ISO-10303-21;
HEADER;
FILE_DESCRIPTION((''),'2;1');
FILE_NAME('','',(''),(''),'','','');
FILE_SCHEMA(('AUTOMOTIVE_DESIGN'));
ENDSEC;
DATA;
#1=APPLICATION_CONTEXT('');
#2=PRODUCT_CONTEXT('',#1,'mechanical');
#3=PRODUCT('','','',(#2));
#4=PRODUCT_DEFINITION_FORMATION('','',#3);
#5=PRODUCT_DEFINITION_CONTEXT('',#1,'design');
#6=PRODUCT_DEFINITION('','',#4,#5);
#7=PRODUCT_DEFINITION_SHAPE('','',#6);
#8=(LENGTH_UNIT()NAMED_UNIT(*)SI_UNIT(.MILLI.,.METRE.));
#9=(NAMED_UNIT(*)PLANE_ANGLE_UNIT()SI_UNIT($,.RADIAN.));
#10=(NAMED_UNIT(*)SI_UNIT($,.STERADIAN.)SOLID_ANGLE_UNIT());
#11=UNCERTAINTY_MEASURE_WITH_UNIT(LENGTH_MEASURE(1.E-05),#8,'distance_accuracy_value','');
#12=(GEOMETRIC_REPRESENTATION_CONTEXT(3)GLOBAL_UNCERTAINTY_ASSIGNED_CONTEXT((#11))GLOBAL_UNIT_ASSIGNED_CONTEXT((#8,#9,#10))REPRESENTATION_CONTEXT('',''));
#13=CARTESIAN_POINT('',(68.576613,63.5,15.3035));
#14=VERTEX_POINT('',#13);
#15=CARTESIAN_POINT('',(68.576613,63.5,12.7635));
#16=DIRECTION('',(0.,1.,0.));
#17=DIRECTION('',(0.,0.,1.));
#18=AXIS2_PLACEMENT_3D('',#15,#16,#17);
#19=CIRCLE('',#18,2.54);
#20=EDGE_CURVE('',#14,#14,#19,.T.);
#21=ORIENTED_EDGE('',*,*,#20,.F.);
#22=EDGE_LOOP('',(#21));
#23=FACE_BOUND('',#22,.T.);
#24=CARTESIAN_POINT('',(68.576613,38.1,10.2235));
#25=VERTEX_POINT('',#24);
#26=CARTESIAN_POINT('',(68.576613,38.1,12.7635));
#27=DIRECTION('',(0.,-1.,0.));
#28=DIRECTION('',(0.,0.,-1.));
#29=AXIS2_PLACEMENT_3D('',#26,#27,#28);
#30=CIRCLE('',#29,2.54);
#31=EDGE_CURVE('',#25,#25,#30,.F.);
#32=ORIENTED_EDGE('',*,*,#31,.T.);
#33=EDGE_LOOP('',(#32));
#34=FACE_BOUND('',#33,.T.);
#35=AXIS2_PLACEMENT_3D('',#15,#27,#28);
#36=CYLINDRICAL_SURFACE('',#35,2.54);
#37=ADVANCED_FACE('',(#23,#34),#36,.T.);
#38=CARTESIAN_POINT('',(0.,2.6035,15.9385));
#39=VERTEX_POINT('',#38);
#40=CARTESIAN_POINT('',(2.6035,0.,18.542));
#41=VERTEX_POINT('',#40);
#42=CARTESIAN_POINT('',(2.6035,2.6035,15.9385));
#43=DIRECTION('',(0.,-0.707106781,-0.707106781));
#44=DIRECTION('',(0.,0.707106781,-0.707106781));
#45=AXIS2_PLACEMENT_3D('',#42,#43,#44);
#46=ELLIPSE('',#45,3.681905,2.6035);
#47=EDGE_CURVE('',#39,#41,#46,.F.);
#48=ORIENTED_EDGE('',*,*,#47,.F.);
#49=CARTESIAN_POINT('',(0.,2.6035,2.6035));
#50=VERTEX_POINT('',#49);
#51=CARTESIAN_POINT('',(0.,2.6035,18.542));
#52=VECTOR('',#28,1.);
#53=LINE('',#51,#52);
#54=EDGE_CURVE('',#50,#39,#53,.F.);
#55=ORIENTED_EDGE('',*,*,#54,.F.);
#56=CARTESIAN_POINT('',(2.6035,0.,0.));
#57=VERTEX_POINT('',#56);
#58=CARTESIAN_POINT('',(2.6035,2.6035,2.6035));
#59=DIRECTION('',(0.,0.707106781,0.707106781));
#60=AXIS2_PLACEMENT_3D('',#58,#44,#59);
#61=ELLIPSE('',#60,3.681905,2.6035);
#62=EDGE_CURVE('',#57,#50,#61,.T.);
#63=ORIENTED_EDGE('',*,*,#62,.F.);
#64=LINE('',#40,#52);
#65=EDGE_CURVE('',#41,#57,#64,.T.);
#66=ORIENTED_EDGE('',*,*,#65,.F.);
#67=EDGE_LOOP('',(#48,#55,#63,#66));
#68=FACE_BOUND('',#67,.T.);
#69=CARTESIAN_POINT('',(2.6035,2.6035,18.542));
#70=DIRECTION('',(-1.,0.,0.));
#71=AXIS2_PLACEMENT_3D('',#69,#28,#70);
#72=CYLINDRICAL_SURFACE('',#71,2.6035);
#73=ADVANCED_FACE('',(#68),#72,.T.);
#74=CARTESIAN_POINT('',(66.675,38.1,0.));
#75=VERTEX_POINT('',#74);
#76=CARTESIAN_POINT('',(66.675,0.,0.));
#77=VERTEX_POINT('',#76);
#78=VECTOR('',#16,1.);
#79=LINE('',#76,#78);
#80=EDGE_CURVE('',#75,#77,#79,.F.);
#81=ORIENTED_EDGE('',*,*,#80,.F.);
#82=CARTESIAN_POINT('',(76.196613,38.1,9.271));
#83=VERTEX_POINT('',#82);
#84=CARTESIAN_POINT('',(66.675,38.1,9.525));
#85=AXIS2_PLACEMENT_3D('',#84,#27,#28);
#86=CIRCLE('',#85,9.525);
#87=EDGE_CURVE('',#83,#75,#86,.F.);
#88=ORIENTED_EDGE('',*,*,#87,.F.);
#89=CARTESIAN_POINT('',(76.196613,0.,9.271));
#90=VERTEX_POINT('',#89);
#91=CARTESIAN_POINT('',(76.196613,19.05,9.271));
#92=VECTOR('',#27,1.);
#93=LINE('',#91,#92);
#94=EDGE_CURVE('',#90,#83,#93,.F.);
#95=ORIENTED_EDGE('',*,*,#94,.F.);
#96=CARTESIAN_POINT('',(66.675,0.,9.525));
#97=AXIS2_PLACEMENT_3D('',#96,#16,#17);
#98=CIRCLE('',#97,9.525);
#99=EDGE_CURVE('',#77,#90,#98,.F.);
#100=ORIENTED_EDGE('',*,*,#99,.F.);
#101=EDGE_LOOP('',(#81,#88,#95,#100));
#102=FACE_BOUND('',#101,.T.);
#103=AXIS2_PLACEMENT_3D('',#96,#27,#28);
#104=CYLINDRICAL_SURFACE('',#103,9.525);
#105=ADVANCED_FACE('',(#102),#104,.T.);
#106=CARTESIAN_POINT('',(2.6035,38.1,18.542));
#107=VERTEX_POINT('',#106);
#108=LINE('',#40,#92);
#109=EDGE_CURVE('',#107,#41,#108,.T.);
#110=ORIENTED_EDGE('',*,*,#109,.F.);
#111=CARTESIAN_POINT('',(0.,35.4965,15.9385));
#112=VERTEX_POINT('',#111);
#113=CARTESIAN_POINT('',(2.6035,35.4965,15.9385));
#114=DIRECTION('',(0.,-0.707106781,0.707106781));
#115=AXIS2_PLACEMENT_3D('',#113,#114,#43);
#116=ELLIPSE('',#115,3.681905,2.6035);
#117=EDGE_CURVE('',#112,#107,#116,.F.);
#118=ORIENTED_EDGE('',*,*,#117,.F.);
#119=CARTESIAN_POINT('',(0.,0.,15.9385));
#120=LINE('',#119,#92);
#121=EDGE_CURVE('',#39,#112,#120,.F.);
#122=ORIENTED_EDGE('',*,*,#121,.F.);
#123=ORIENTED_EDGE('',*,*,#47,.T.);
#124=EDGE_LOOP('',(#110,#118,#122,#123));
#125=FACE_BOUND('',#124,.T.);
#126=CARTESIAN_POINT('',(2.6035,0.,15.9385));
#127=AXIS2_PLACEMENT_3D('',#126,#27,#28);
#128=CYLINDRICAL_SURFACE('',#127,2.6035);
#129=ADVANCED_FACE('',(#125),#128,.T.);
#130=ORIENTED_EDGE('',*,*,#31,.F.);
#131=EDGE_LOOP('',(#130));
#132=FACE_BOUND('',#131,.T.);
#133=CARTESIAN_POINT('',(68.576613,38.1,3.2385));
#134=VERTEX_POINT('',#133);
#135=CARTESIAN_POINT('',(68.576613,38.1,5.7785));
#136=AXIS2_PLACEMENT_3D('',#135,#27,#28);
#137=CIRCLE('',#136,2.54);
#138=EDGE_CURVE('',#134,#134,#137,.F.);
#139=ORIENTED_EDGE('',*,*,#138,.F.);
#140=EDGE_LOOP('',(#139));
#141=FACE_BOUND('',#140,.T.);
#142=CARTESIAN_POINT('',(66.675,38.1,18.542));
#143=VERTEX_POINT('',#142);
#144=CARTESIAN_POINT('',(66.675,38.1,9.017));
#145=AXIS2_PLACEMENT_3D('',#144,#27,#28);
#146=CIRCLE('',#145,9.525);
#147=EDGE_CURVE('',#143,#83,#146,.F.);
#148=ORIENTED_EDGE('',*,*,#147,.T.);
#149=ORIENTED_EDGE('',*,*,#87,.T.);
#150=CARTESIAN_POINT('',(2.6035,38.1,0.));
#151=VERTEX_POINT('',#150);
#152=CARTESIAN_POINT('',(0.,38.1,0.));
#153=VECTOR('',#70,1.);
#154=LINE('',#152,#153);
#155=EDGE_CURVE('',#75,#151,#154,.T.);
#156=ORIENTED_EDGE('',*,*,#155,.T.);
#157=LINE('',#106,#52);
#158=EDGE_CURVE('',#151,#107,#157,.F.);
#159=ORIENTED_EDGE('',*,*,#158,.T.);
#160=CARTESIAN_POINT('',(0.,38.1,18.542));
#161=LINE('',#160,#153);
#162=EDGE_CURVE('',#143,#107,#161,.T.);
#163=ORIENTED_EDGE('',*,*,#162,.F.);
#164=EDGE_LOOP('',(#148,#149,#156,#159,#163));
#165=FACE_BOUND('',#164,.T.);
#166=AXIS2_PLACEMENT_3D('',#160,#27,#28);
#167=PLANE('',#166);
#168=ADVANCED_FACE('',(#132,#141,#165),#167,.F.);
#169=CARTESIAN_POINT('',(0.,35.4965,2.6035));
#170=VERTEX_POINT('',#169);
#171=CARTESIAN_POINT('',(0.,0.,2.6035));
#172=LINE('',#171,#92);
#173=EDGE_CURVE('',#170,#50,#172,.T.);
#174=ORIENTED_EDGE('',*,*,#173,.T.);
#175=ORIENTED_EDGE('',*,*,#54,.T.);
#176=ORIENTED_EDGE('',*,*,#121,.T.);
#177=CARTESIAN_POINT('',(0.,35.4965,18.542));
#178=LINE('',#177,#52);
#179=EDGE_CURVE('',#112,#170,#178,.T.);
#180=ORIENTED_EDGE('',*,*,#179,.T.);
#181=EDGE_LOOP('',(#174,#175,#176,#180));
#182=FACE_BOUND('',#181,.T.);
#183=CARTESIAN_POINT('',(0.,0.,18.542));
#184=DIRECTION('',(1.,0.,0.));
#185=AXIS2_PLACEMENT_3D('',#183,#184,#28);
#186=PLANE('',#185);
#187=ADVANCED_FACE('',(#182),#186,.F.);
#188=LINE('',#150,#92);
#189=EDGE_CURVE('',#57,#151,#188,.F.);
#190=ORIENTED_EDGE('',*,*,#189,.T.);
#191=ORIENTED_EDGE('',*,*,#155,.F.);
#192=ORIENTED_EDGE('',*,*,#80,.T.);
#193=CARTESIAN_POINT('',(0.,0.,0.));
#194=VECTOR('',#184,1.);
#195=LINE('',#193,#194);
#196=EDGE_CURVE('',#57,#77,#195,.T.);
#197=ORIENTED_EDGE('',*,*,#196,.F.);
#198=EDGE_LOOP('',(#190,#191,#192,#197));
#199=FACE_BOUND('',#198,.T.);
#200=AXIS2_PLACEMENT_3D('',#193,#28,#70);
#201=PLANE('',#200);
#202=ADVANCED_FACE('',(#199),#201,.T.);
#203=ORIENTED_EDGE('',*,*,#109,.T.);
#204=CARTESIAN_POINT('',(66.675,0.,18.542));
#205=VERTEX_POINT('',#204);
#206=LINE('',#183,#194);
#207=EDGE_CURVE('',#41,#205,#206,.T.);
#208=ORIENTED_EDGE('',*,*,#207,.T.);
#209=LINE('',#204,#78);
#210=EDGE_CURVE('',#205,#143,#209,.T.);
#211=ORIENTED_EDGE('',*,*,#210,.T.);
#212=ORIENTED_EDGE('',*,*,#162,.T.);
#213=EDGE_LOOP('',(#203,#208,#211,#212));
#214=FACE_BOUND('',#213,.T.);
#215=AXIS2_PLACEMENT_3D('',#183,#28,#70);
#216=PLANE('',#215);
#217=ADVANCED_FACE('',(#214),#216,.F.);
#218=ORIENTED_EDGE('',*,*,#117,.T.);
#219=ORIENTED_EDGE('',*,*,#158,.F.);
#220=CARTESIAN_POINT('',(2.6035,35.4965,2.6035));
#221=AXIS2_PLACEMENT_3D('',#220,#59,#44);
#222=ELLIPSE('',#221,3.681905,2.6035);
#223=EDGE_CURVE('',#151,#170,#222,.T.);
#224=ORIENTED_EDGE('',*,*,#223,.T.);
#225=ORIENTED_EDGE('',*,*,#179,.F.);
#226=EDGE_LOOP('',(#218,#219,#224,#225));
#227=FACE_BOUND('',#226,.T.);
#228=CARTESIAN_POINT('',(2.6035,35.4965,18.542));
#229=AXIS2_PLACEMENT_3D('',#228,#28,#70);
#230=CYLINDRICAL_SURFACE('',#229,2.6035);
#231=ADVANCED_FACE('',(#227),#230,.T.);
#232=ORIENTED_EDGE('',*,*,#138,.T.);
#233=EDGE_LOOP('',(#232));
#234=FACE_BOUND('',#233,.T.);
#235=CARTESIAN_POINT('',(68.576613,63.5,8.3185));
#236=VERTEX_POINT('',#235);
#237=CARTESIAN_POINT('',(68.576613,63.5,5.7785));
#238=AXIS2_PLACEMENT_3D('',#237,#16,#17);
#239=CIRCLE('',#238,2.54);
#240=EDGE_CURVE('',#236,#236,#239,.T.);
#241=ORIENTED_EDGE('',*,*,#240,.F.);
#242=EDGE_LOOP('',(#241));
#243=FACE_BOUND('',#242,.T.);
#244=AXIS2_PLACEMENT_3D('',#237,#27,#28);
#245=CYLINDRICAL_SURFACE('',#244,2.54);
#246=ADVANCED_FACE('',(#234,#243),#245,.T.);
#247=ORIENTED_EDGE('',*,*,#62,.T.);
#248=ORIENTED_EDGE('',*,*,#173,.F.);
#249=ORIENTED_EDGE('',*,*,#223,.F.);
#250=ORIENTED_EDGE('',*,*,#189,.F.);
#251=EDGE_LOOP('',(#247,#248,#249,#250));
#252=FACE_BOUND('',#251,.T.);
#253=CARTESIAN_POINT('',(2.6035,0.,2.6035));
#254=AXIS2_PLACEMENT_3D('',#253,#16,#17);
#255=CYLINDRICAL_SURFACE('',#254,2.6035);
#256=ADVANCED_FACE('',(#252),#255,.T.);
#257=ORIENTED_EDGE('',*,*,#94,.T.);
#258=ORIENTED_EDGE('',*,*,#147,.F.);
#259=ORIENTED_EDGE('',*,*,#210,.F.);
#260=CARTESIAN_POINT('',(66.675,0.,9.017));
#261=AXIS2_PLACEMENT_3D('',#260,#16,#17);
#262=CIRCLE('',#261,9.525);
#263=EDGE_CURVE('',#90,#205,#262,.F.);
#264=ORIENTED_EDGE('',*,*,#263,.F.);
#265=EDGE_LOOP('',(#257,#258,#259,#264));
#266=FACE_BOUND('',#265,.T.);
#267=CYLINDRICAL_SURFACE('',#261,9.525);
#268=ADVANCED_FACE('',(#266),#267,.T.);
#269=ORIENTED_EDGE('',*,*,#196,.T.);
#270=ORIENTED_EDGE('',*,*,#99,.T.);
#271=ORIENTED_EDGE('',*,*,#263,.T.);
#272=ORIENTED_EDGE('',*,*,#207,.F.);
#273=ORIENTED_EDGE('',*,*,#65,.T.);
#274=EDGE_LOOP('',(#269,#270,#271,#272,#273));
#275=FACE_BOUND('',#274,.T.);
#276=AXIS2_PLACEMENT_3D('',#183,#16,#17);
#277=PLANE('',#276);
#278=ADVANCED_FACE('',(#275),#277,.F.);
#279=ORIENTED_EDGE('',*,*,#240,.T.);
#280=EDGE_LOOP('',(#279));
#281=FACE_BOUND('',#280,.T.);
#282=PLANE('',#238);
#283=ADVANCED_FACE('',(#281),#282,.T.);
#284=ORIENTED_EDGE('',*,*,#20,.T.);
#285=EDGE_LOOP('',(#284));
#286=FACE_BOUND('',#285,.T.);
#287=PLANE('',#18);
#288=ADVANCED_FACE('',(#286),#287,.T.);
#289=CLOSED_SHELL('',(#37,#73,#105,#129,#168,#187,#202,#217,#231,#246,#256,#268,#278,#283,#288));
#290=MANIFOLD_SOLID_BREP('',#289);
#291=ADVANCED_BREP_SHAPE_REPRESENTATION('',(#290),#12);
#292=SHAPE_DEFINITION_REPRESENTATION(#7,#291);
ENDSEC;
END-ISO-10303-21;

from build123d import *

# Parameters (mm, degrees)
SKETCH1_W           = 76.2
SKETCH1_H           = 38.1
BOSS_EXTRUDE1_DEPTH = 18.542
FILLET1_R           = 9.525
SKETCH2_R           = 2.54
BOSS_EXTRUDE2_DEPTH = 25.4
FILLET2_R           = 2.6035


with BuildPart() as part:
    # Sketch1 → Boss-Extrude1 (new body)
    with BuildSketch(Plane.XY):
        with Locations((38.1, 19.05)):
            Rectangle(SKETCH1_W, SKETCH1_H)
    extrude(amount=BOSS_EXTRUDE1_DEPTH)

    # Fillet1
    # the kernel refuses this fillet: 9.525 mm, written as the material it takes off along each edge
    with BuildSketch(Plane(origin=(76.2, -23.8125, 18.542), x_dir=(0, 0, -1), z_dir=(0, 1, 0))) as fillet1_piece_1:
        with BuildLine():
            CenterArc((FILLET1_R, FILLET1_R), FILLET1_R, 180, 90)
            Line((0, FILLET1_R), (0, 0))
            Line((0, 0), (FILLET1_R, 0))
        make_face()
    extrude(amount=85.725, mode=Mode.SUBTRACT)
    with BuildSketch(Plane(origin=(76.2, -23.8125, 0), x_dir=(0, 0, 1), z_dir=(0, 1, 0))) as fillet1_piece_2:
        with BuildLine():
            CenterArc((FILLET1_R, -FILLET1_R), FILLET1_R, 90, 90)
            Line((0, -FILLET1_R), (0, 0))
            Line((0, 0), (FILLET1_R, 0))
        make_face()
    extrude(amount=85.725, mode=Mode.SUBTRACT)

    # Sketch2 → Boss-Extrude2 (add)
    with BuildSketch(Plane(origin=(0, 38.1, 0), x_dir=(1, 0, 0), z_dir=(0, 1, 0))):
        with Locations(Location((68.576612731, -5.7785, 0), (0, 0, 90))):
            Circle(SKETCH2_R)
        with Locations(Location((68.576612731, -12.7635, 0), (0, 0, 90))):
            Circle(SKETCH2_R)
    extrude(amount=BOSS_EXTRUDE2_DEPTH)

    # Fillet2
    fillet2_edges = [part.edges().sort_by_distance(p)[0] for p in [
        (0, 19.05, 18.542),
        (0, 19.05, 0),
        (0, 38.1, 9.271),
        (0, 0, 9.271),
    ]]
    fillet(fillet2_edges, radius=FILLET2_R)


solid = part.part
